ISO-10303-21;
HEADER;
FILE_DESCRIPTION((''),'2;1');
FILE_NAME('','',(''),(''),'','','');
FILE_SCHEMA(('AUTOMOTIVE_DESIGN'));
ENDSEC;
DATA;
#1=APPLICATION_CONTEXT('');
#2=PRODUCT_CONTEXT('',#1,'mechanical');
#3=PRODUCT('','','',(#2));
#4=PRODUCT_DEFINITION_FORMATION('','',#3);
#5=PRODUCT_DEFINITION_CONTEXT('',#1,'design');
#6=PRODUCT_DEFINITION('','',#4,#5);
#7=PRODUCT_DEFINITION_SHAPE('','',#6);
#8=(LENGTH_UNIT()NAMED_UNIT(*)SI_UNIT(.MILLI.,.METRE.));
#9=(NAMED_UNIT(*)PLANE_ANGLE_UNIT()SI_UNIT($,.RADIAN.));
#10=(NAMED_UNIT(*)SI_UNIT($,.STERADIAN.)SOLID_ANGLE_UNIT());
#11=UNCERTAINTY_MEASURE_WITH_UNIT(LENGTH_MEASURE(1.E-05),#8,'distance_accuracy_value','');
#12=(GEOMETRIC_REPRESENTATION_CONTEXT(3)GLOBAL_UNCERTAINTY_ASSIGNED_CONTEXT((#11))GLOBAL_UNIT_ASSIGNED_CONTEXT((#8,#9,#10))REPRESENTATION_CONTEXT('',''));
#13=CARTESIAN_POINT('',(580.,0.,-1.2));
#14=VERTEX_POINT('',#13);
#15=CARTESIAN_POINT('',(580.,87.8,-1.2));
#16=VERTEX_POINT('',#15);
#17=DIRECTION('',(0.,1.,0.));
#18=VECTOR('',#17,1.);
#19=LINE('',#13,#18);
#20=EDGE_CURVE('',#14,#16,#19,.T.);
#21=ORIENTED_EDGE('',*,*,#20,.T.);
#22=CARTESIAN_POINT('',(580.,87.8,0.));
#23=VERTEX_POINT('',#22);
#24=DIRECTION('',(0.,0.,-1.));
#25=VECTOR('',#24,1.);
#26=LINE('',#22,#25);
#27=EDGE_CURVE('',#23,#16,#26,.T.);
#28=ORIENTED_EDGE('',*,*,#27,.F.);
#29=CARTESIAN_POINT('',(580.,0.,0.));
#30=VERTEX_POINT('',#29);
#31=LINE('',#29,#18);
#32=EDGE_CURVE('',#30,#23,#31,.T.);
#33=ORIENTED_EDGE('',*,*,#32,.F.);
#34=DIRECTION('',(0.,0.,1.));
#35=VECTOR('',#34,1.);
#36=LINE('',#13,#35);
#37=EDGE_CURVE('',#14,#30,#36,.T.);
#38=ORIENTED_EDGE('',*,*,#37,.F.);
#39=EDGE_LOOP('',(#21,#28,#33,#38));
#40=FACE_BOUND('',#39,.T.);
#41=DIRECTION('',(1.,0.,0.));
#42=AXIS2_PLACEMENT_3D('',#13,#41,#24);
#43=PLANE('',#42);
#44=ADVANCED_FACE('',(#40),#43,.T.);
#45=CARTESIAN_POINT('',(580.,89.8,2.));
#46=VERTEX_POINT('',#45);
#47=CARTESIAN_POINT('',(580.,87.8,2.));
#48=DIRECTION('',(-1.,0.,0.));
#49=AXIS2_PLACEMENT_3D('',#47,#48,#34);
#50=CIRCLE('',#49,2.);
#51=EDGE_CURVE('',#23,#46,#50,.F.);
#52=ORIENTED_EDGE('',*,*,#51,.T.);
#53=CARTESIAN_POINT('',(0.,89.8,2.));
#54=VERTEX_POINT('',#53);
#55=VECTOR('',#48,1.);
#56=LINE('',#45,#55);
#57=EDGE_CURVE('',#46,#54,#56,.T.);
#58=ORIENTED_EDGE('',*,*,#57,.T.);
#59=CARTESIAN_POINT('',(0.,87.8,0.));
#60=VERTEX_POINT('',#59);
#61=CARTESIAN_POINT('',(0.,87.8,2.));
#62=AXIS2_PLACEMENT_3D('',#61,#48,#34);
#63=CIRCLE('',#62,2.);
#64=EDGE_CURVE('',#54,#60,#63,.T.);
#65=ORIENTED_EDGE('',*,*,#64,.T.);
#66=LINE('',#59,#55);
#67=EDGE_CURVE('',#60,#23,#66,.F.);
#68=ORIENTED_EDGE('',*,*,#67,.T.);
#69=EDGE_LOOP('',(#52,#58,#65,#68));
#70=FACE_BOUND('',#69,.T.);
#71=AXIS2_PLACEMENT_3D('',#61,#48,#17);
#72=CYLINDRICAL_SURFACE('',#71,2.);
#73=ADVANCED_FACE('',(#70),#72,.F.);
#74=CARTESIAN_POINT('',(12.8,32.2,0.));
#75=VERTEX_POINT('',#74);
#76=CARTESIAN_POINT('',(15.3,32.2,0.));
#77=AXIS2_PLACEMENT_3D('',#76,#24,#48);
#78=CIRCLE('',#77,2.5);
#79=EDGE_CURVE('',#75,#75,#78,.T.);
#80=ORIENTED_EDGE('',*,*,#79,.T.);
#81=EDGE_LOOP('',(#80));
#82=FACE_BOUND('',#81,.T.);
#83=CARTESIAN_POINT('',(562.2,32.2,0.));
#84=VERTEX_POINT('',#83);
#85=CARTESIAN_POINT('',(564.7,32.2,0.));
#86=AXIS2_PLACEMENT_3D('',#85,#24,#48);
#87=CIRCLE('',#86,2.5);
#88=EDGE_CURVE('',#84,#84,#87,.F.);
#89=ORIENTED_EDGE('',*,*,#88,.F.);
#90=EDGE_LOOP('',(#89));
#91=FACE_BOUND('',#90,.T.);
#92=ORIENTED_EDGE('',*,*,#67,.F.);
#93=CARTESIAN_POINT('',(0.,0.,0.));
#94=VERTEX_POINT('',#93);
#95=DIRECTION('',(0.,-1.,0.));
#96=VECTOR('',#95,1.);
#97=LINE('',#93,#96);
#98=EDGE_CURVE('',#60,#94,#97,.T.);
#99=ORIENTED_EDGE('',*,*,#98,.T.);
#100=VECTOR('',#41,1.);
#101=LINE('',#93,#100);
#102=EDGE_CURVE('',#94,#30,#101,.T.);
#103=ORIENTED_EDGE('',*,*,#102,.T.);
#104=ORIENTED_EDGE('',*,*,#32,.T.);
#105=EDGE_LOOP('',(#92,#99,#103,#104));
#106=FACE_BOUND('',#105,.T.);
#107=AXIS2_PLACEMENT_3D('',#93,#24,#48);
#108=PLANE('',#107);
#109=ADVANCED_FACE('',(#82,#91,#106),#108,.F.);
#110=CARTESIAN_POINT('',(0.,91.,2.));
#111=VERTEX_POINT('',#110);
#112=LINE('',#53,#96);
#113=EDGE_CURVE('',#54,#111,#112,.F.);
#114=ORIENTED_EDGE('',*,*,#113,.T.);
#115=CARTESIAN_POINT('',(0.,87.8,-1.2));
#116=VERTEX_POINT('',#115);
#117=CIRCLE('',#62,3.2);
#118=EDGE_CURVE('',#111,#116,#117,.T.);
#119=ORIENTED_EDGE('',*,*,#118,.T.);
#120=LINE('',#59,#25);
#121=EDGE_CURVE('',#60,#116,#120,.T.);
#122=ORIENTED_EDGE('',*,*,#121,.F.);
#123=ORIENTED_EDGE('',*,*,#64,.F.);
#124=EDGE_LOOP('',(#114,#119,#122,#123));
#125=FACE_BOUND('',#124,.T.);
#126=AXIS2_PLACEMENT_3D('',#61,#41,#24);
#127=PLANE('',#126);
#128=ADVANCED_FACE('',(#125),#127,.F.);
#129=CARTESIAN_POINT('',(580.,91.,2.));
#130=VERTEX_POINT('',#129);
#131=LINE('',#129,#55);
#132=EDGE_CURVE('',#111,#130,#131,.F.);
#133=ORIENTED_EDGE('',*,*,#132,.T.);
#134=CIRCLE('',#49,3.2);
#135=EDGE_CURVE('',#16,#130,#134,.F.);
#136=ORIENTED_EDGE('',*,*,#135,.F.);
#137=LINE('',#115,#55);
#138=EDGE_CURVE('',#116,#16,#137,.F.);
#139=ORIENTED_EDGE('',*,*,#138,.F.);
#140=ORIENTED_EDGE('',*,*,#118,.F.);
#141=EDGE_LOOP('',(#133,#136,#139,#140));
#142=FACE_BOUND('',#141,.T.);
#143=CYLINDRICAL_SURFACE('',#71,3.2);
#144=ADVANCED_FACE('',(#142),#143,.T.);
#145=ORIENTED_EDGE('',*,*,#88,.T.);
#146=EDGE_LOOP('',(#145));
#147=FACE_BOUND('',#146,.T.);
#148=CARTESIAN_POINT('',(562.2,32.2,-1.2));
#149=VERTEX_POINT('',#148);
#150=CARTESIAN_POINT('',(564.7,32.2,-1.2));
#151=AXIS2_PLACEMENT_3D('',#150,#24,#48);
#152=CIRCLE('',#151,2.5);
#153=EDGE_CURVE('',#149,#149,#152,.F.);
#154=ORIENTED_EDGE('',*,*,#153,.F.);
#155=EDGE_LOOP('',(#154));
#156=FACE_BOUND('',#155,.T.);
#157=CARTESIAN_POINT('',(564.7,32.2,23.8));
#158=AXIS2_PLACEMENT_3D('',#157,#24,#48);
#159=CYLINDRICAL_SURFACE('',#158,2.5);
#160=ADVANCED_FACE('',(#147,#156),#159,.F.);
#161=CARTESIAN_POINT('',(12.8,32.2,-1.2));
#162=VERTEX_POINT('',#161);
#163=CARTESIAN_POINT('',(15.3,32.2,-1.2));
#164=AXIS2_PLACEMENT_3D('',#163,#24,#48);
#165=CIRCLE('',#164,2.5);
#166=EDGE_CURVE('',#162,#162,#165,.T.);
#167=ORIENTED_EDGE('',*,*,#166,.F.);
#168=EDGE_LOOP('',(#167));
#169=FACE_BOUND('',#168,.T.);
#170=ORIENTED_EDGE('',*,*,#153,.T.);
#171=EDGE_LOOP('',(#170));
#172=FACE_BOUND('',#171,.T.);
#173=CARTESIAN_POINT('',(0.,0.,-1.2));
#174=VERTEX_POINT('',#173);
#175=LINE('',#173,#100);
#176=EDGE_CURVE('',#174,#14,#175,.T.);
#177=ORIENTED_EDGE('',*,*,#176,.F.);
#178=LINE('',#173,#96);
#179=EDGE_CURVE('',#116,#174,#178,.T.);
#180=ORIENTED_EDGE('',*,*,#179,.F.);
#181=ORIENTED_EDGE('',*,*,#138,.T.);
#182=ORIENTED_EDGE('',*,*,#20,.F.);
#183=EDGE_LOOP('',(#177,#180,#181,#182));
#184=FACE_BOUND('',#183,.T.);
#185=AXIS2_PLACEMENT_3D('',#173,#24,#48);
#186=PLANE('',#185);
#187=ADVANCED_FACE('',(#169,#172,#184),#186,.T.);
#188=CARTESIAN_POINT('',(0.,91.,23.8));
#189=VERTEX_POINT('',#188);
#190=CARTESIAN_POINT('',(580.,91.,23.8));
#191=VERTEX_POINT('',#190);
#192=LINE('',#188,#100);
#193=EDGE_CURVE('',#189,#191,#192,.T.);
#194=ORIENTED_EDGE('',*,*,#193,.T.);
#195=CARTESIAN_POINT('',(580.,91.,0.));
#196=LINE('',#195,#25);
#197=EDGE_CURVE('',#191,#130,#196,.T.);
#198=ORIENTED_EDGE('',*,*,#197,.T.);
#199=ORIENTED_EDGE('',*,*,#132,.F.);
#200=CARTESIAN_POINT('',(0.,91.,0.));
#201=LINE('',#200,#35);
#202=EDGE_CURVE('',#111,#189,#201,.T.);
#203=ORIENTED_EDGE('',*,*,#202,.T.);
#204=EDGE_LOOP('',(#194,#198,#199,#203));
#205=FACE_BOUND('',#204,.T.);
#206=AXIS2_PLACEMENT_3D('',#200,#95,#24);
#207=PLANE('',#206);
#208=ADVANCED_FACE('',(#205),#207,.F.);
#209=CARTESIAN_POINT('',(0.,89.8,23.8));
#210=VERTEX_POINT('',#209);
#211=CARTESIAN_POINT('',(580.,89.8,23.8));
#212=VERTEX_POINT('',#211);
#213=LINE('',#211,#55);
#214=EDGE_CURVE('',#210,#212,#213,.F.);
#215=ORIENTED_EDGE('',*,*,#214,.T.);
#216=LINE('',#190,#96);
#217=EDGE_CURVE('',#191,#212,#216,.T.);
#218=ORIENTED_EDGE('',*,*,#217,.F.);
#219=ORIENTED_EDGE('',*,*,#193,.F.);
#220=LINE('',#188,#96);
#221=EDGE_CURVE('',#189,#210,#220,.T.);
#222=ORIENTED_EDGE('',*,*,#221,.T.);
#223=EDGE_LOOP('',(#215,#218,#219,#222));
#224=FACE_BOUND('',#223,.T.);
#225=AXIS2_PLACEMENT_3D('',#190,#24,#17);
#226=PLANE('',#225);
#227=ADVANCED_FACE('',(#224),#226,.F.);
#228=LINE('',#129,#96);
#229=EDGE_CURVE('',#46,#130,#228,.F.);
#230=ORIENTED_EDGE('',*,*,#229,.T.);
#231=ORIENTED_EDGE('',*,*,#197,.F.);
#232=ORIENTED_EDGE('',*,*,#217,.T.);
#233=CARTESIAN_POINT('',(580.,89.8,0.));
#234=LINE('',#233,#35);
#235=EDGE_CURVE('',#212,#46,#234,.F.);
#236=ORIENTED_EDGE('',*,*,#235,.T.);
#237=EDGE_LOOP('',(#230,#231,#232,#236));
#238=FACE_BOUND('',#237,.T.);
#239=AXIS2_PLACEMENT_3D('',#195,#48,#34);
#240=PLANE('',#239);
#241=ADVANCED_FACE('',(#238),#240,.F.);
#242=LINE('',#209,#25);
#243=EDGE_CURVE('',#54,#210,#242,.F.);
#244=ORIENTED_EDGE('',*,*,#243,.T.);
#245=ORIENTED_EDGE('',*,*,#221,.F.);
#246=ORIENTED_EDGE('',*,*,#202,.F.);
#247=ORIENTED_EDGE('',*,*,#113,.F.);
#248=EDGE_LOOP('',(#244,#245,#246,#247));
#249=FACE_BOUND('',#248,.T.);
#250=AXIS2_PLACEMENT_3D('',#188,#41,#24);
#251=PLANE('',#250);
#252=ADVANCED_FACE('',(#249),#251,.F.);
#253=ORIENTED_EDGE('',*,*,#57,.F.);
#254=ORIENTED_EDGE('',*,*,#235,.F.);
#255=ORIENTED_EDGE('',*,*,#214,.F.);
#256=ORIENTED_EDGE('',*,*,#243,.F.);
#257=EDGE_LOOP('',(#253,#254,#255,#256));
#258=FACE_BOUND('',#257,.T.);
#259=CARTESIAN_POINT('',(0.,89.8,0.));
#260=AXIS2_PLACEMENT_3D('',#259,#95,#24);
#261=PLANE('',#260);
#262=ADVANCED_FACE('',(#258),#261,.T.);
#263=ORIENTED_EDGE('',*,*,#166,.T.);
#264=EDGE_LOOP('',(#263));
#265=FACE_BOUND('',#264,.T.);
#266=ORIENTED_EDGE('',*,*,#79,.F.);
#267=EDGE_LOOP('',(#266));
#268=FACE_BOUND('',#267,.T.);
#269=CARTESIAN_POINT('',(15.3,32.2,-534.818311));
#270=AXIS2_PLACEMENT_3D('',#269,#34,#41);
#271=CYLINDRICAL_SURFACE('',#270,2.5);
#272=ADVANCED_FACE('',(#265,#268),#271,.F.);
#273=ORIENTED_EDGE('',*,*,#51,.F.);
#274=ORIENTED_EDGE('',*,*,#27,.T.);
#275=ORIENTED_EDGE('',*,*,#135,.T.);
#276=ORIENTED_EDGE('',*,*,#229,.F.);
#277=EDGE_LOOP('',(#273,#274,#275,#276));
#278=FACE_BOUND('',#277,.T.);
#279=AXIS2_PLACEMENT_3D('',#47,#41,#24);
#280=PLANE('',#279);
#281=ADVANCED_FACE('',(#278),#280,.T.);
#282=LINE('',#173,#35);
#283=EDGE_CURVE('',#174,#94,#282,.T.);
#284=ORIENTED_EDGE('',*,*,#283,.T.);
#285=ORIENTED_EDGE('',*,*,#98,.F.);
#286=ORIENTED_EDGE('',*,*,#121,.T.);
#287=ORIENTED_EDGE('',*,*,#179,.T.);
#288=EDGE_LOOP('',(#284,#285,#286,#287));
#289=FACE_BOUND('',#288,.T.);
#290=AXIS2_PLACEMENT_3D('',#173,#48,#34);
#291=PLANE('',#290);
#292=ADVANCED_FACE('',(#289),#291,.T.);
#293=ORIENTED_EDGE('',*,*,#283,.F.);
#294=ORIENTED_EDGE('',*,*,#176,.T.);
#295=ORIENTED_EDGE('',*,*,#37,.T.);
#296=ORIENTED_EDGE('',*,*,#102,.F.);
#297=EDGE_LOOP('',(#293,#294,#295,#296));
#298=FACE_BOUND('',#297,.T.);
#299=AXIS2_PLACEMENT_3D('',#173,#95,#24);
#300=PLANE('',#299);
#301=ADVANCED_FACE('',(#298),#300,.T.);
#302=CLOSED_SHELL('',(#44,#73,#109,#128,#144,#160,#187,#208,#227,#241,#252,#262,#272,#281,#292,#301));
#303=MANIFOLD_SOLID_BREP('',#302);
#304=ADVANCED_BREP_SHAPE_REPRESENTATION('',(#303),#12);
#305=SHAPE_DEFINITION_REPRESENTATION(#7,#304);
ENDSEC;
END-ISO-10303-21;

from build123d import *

# Parameters (mm, degrees)
SKETCH1_W                    = 580
SKETCH1_H                    = 91
BASE_FLANGE1_DEPTH           = 1.2
EDGE_FLANGE2_STRIP_W         = 8.8
EDGE_FLANGE2_STRIP_H         = 1.2
EDGE_FLANGE2_STRIP_CUT_DEPTH = 580
EDGE_FLANGE2_DEPTH           = 580
CUT_EXTRUDE1_START           = -1.2
CUT_EXTRUDE1_OUTLINE_R       = 2.5
CUT_EXTRUDE1_DEPTH           = 1.2
CUT_EXTRUDE2_DEPTH           = 811.392138245
CUT_EXTRUDE2_DEPTH_BACK      = 811.392138245
SKETCH18_R                   = 2.5


# Read off the part's stored shape, not the designer's step: Cut-Extrude1
# Sheet-metal steps are written as plain solids
with BuildPart() as part:
    # Sketch1 → Base-Flange1 (new body)
    with BuildSketch(Plane.XY):
        with Locations((290, 45.5)):
            Rectangle(SKETCH1_W, SKETCH1_H)
    extrude(amount=-BASE_FLANGE1_DEPTH)

    # Edge-Flange2 strip (across the edge) → Edge-Flange2 strip cut (cut)
    with BuildSketch(Plane(origin=(580, 91, 0), x_dir=(0, -1, 0), z_dir=(-1, 0, 0))):
        with Locations((-1.2, -0.6)):
            Rectangle(EDGE_FLANGE2_STRIP_W, EDGE_FLANGE2_STRIP_H)
    extrude(amount=EDGE_FLANGE2_STRIP_CUT_DEPTH, mode=Mode.SUBTRACT)

    # Edge-Flange2 section (across the edge) → Edge-Flange2 (add)
    with BuildSketch(Plane(origin=(580, 91, 0), x_dir=(0, -1, 0), z_dir=(-1, 0, 0))):
        with BuildLine():
            Line((0, 2), (0, 23.8))
            Line((0, 23.8), (1.2, 23.8))
            Line((1.2, 23.8), (1.2, 2))
            ThreePointArc((1.2, 2), (1.785786438, 0.585786438), (3.2, 0))
            Line((3.2, 0), (3.2, -1.2))
            ThreePointArc((3.2, -1.2), (0.9372583, -0.2627417), (0, 2))
        make_face()
    extrude(amount=EDGE_FLANGE2_DEPTH)

    # Cut-Extrude1 outline → Cut-Extrude1 (cut)
    with BuildSketch(Plane.XY.offset(CUT_EXTRUDE1_START)):
        with Locations((15.3, 32.2)):
            Circle(CUT_EXTRUDE1_OUTLINE_R)
    extrude(amount=CUT_EXTRUDE1_DEPTH, mode=Mode.SUBTRACT)

    # Sketch18 → Cut-Extrude2 (cut, two sides: drawn at the far end of the back side and taken through both)
    with BuildSketch(Plane.XY.offset(-534.818311308).offset(-CUT_EXTRUDE2_DEPTH_BACK)):
        with Locations(Location((15.3, 32.2, 0), (0, 0, 180))):
            Circle(SKETCH18_R)
        with Locations(Location((564.7, 32.2, 0), (0, 0, 180))):
            Circle(SKETCH18_R)
    extrude(amount=CUT_EXTRUDE2_DEPTH + CUT_EXTRUDE2_DEPTH_BACK, mode=Mode.SUBTRACT)


solid = part.part
